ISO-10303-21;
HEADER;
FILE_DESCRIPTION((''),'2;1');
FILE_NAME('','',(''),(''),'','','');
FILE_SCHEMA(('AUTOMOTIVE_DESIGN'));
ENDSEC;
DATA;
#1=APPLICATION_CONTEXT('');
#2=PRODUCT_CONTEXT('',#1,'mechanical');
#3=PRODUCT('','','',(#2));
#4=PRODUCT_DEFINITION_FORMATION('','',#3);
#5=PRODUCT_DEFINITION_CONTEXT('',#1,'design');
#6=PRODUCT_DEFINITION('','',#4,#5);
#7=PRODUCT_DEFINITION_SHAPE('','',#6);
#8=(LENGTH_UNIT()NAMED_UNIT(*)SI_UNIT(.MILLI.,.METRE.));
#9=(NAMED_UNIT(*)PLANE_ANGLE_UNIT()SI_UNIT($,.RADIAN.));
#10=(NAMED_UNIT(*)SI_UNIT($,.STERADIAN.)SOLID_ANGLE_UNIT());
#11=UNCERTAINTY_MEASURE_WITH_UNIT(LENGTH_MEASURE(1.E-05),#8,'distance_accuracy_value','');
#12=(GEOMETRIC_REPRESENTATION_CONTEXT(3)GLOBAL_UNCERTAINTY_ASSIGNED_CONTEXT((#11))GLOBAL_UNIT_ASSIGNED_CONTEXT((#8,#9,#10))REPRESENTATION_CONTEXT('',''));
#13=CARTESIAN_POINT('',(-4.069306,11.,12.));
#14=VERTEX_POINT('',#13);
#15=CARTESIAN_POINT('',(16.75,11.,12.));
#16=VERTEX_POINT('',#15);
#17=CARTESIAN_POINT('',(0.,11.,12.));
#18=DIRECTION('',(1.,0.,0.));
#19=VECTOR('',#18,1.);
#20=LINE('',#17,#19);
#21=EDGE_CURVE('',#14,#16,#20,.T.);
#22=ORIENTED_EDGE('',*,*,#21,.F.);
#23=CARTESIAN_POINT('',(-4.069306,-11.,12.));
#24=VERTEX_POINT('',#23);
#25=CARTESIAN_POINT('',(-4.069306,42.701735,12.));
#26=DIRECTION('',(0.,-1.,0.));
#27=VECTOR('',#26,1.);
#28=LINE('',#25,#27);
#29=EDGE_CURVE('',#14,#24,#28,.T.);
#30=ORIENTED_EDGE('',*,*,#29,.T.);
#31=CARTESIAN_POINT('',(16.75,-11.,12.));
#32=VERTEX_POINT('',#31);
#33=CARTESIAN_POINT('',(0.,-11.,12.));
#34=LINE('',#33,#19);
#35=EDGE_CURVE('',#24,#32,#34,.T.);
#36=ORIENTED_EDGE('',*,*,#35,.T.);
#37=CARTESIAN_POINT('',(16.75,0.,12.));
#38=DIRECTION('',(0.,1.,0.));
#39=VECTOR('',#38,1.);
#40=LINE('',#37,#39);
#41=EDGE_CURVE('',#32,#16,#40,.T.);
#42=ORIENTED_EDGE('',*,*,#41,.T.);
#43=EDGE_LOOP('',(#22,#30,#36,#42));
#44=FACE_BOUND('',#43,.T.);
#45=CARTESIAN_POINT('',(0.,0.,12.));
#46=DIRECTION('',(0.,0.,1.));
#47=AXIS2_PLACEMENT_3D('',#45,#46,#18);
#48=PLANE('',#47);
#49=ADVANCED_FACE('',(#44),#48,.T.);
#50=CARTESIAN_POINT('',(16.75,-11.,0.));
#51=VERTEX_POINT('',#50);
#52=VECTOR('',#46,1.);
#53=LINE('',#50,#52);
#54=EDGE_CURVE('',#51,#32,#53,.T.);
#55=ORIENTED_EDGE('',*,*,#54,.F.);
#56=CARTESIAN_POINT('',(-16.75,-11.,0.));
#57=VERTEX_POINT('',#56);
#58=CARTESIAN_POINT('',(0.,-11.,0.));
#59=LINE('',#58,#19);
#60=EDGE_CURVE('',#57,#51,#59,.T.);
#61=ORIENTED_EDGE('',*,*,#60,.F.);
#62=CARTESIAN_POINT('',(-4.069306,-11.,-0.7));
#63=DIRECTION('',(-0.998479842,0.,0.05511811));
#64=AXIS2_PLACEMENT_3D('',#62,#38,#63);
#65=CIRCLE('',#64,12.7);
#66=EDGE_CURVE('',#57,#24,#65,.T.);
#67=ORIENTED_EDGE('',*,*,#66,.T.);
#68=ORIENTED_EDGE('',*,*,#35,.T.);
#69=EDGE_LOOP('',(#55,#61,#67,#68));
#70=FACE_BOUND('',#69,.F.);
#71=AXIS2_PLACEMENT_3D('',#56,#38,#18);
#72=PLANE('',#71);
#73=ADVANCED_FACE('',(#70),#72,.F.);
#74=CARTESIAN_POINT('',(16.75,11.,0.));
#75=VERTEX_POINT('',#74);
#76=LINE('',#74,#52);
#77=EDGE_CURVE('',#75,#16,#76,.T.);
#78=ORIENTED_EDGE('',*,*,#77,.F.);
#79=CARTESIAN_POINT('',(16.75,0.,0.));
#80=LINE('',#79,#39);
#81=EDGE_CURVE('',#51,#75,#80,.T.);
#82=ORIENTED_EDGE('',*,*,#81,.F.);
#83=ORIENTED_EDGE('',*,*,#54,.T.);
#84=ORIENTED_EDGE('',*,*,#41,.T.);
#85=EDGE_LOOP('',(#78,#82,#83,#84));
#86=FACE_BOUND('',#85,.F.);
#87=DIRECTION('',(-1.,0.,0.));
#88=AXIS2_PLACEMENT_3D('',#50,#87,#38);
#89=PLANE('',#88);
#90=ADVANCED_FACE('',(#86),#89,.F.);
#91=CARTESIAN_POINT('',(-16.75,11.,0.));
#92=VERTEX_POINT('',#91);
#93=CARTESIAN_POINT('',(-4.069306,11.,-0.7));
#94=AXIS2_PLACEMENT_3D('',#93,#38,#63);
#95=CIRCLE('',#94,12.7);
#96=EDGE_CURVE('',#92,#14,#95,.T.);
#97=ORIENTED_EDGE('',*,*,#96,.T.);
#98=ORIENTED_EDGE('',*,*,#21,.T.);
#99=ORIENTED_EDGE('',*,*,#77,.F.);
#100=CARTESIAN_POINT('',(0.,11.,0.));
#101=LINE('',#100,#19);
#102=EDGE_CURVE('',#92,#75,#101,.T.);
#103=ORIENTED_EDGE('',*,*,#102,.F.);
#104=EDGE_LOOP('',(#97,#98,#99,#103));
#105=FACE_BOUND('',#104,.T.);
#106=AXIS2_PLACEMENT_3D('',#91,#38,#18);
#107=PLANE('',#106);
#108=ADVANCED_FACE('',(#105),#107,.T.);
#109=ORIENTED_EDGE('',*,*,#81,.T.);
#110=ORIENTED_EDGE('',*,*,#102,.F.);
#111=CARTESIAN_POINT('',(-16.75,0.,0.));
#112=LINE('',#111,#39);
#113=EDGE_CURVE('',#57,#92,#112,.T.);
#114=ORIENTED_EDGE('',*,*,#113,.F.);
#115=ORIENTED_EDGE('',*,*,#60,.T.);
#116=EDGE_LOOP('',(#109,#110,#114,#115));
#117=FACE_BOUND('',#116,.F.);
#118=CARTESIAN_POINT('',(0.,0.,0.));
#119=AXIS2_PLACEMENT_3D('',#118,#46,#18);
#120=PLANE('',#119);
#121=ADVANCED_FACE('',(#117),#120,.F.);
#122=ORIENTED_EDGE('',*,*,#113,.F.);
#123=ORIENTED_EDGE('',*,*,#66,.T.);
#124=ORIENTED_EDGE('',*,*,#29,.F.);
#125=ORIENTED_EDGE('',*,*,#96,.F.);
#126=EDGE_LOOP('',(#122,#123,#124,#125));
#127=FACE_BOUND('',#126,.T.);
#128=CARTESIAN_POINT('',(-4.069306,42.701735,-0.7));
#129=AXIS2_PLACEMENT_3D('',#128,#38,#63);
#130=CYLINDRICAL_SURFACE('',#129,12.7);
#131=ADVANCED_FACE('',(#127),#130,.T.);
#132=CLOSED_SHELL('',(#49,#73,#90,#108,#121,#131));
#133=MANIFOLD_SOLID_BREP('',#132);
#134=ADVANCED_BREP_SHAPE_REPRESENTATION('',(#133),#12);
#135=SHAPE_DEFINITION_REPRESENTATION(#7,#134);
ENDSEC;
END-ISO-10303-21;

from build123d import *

# Parameters (mm, degrees)
F0_W        = 33.5
F0_H        = 22
F1_DEPTH    = 12
F2_T1_DEPTH = 85.4034699366


# Not quite as in the source:
# - a fillet or chamfer that OpenCascade refuses, or shapes differently, is made with other operations: its cross-section is extruded or revolved along the edge and cut away or added


with BuildPart() as f1:
    # F0 (on Top) → F1 (new body)
    with BuildSketch(Plane.XY):
        Rectangle(F0_W, F0_H)
    extrude(amount=F1_DEPTH)

    # F2: fillet of radius 12.7 on 1 edges, made by hand

    # F2_s2 → F2_t1 (cut)
    with BuildSketch(Plane.XZ.offset(-42.7017349683)):
        with BuildLine():
            ThreePointArc((-16.75, 0), (-12.7985671498, 8.5244241013), (-4.0693060127, 12))
            Line((-4.0693060127, 12), (-16.75, 12))
            Line((-16.75, 12), (-16.75, 0))
        make_face()
    extrude(amount=F2_T1_DEPTH, mode=Mode.SUBTRACT)


solid = f1.part
